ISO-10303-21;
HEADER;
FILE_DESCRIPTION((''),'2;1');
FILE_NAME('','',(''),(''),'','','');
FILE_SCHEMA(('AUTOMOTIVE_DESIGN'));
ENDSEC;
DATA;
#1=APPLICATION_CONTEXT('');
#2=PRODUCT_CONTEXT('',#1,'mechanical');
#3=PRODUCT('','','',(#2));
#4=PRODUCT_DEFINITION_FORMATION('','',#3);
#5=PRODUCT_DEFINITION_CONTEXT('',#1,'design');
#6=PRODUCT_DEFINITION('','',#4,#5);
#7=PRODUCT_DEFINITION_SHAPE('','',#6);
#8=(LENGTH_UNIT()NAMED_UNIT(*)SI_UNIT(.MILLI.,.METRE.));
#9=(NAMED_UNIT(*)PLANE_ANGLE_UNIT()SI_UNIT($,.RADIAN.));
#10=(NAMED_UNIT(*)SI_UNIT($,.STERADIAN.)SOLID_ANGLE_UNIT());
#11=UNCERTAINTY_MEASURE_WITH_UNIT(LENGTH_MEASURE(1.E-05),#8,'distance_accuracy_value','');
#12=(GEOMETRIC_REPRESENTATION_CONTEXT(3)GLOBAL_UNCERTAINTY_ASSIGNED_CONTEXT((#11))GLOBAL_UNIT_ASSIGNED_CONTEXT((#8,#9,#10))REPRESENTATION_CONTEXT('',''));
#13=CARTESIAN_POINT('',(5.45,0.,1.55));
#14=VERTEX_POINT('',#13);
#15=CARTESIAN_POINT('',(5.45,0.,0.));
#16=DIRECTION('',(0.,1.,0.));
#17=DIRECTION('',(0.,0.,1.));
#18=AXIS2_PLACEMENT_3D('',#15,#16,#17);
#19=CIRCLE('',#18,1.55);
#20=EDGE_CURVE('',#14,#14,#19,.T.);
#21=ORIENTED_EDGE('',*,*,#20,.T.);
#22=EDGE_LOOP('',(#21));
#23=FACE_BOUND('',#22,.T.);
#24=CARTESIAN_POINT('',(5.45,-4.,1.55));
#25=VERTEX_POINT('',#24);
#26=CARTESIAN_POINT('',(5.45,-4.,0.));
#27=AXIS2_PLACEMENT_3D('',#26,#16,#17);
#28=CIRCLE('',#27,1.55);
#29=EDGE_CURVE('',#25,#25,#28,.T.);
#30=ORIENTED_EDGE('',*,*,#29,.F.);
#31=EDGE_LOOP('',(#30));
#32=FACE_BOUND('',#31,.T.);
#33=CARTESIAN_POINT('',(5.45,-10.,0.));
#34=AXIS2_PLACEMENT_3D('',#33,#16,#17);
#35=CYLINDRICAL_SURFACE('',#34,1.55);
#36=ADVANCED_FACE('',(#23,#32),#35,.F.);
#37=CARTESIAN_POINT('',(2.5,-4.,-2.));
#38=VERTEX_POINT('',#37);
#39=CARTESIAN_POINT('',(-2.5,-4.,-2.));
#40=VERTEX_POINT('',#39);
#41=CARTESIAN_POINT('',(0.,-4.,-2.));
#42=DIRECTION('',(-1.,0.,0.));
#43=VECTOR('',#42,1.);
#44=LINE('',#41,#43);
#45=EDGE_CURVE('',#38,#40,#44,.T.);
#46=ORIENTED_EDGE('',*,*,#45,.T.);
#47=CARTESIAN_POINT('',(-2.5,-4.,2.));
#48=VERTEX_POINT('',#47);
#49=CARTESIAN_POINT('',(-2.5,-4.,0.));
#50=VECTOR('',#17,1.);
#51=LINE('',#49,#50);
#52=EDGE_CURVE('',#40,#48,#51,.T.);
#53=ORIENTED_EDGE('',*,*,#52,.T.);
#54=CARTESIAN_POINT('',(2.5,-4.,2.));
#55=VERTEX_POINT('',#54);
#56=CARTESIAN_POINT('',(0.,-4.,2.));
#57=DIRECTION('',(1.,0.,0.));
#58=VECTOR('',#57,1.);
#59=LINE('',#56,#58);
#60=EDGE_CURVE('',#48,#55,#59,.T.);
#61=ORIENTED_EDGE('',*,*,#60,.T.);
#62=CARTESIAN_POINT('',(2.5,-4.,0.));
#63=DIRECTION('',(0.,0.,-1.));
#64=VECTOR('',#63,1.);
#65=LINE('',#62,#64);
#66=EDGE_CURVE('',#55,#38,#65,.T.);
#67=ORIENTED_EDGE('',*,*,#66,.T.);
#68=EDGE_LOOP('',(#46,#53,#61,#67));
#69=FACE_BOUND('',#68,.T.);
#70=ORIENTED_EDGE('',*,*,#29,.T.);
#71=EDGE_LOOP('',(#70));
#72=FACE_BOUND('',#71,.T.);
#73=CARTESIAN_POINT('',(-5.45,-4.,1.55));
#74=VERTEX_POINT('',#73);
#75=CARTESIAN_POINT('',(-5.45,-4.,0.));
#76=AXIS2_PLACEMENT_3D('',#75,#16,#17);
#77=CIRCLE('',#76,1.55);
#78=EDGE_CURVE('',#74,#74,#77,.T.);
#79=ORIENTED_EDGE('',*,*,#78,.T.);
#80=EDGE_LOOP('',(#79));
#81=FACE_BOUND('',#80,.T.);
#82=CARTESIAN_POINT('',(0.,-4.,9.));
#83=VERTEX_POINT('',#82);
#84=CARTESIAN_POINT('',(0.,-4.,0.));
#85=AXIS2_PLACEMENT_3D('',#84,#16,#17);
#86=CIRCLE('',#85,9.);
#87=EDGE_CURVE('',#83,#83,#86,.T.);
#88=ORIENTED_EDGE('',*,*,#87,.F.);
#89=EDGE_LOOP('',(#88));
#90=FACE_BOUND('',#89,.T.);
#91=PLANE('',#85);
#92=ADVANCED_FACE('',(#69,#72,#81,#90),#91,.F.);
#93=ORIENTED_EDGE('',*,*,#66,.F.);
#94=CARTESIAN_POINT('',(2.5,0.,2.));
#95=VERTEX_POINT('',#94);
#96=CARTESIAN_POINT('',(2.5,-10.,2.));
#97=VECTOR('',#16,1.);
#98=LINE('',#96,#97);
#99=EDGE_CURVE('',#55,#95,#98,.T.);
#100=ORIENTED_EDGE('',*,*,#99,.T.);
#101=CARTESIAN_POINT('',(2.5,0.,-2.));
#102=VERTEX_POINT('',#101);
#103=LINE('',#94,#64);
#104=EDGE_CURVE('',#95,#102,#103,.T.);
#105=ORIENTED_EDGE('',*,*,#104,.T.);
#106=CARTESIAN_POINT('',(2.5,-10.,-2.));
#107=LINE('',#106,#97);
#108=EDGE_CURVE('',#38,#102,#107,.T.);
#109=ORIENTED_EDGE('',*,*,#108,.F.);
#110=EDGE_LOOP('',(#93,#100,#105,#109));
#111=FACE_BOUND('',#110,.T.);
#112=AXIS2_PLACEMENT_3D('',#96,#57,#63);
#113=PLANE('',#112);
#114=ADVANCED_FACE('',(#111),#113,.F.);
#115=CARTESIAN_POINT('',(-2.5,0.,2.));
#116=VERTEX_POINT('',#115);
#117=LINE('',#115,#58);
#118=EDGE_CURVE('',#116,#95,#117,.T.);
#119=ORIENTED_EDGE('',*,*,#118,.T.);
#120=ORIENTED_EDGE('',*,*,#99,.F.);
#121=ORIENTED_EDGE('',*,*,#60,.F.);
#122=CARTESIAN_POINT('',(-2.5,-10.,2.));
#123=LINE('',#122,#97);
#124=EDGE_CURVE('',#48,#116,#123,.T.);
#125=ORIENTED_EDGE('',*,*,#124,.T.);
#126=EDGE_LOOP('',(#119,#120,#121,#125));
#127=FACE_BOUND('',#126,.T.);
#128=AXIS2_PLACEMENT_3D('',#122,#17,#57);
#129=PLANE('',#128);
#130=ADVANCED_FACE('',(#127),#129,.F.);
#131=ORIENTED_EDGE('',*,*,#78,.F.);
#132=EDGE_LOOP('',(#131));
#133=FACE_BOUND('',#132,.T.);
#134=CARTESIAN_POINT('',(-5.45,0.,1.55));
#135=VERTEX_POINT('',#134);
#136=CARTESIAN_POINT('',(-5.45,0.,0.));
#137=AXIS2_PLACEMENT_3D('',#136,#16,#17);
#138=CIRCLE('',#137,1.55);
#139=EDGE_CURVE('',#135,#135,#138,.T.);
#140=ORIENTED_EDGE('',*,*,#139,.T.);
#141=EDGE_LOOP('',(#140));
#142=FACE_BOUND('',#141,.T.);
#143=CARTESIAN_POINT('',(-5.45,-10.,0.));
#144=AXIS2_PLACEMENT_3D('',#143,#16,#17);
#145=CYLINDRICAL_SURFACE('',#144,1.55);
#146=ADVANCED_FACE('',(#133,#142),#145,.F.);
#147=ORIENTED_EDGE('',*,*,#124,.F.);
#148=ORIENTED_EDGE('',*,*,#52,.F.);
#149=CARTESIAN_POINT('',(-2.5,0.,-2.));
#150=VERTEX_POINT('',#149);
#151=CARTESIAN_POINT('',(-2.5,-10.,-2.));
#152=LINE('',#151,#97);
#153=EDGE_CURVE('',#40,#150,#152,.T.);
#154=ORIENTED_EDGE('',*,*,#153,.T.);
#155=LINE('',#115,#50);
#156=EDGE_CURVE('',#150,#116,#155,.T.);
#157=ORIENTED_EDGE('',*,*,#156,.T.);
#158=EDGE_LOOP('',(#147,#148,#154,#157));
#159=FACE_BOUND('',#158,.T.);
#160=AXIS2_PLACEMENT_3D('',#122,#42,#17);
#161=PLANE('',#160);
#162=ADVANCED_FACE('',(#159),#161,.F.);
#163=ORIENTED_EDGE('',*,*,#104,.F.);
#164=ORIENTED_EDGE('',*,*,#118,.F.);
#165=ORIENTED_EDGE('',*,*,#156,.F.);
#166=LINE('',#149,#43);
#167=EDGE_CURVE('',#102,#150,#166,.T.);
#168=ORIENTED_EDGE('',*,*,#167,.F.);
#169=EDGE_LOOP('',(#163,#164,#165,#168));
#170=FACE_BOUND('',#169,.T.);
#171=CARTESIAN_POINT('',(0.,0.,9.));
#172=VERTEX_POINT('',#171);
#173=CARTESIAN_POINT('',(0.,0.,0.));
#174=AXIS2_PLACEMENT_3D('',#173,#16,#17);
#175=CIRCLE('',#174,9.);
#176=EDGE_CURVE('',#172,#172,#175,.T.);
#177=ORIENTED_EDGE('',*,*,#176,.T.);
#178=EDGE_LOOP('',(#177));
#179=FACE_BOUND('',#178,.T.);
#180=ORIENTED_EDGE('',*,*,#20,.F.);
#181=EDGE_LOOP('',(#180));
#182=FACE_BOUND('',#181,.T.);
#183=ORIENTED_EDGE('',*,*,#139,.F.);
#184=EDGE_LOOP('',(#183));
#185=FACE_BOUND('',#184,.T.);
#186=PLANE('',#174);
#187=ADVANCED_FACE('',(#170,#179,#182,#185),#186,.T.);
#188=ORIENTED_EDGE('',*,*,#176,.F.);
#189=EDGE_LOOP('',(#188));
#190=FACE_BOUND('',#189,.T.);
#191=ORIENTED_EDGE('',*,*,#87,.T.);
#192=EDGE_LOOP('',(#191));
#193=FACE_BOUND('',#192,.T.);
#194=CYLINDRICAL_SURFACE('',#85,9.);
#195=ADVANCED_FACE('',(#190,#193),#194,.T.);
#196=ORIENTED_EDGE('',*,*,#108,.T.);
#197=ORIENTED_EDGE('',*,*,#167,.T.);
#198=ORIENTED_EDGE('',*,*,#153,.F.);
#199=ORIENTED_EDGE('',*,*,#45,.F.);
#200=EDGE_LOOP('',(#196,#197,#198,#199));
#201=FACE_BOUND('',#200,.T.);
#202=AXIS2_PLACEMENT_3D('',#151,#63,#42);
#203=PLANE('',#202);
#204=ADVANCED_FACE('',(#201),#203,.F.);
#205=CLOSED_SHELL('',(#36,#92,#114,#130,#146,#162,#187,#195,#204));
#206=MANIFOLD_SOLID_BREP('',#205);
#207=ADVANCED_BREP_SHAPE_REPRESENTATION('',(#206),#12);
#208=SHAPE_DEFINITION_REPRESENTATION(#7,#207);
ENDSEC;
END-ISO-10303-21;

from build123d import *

# Parameters (mm, degrees)
SKETCH1_R          = 9
BASE_FLANGE1_DEPTH = 4
SKETCH7_R          = 1.55
CUT_EXTRUDE2_DEPTH = 10
SKETCH8_W          = 5
SKETCH8_H          = 4
CUT_EXTRUDE3_DEPTH = 10


# Sheet-metal steps are written as plain solids
with BuildPart() as part:
    # Sketch1 → Base-Flange1 (new body)
    with BuildSketch(Plane(origin=(0, 0, 0), x_dir=(1, 0, 0), z_dir=(0, 1, 0))):
        with Locations(Location((0, 0, 0), (0, 0, 270))):
            Circle(SKETCH1_R)
    extrude(amount=-BASE_FLANGE1_DEPTH)

    # Sketch7 → Cut-Extrude2 (cut)
    with BuildSketch(Plane(origin=(0, 0, 0), x_dir=(1, 0, 0), z_dir=(0, 1, 0))):
        with Locations(Location((-5.45, 0, 0), (0, 0, 270))):
            Circle(SKETCH7_R)
        with Locations(Location((5.45, 0, 0), (0, 0, 270))):
            Circle(SKETCH7_R)
    extrude(amount=-CUT_EXTRUDE2_DEPTH, mode=Mode.SUBTRACT)

    # Sketch8 → Cut-Extrude3 (cut)
    with BuildSketch(Plane(origin=(0, 0, 0), x_dir=(1, 0, 0), z_dir=(0, 1, 0))):
        Rectangle(SKETCH8_W, SKETCH8_H)
    extrude(amount=-CUT_EXTRUDE3_DEPTH, mode=Mode.SUBTRACT)


solid = part.part
